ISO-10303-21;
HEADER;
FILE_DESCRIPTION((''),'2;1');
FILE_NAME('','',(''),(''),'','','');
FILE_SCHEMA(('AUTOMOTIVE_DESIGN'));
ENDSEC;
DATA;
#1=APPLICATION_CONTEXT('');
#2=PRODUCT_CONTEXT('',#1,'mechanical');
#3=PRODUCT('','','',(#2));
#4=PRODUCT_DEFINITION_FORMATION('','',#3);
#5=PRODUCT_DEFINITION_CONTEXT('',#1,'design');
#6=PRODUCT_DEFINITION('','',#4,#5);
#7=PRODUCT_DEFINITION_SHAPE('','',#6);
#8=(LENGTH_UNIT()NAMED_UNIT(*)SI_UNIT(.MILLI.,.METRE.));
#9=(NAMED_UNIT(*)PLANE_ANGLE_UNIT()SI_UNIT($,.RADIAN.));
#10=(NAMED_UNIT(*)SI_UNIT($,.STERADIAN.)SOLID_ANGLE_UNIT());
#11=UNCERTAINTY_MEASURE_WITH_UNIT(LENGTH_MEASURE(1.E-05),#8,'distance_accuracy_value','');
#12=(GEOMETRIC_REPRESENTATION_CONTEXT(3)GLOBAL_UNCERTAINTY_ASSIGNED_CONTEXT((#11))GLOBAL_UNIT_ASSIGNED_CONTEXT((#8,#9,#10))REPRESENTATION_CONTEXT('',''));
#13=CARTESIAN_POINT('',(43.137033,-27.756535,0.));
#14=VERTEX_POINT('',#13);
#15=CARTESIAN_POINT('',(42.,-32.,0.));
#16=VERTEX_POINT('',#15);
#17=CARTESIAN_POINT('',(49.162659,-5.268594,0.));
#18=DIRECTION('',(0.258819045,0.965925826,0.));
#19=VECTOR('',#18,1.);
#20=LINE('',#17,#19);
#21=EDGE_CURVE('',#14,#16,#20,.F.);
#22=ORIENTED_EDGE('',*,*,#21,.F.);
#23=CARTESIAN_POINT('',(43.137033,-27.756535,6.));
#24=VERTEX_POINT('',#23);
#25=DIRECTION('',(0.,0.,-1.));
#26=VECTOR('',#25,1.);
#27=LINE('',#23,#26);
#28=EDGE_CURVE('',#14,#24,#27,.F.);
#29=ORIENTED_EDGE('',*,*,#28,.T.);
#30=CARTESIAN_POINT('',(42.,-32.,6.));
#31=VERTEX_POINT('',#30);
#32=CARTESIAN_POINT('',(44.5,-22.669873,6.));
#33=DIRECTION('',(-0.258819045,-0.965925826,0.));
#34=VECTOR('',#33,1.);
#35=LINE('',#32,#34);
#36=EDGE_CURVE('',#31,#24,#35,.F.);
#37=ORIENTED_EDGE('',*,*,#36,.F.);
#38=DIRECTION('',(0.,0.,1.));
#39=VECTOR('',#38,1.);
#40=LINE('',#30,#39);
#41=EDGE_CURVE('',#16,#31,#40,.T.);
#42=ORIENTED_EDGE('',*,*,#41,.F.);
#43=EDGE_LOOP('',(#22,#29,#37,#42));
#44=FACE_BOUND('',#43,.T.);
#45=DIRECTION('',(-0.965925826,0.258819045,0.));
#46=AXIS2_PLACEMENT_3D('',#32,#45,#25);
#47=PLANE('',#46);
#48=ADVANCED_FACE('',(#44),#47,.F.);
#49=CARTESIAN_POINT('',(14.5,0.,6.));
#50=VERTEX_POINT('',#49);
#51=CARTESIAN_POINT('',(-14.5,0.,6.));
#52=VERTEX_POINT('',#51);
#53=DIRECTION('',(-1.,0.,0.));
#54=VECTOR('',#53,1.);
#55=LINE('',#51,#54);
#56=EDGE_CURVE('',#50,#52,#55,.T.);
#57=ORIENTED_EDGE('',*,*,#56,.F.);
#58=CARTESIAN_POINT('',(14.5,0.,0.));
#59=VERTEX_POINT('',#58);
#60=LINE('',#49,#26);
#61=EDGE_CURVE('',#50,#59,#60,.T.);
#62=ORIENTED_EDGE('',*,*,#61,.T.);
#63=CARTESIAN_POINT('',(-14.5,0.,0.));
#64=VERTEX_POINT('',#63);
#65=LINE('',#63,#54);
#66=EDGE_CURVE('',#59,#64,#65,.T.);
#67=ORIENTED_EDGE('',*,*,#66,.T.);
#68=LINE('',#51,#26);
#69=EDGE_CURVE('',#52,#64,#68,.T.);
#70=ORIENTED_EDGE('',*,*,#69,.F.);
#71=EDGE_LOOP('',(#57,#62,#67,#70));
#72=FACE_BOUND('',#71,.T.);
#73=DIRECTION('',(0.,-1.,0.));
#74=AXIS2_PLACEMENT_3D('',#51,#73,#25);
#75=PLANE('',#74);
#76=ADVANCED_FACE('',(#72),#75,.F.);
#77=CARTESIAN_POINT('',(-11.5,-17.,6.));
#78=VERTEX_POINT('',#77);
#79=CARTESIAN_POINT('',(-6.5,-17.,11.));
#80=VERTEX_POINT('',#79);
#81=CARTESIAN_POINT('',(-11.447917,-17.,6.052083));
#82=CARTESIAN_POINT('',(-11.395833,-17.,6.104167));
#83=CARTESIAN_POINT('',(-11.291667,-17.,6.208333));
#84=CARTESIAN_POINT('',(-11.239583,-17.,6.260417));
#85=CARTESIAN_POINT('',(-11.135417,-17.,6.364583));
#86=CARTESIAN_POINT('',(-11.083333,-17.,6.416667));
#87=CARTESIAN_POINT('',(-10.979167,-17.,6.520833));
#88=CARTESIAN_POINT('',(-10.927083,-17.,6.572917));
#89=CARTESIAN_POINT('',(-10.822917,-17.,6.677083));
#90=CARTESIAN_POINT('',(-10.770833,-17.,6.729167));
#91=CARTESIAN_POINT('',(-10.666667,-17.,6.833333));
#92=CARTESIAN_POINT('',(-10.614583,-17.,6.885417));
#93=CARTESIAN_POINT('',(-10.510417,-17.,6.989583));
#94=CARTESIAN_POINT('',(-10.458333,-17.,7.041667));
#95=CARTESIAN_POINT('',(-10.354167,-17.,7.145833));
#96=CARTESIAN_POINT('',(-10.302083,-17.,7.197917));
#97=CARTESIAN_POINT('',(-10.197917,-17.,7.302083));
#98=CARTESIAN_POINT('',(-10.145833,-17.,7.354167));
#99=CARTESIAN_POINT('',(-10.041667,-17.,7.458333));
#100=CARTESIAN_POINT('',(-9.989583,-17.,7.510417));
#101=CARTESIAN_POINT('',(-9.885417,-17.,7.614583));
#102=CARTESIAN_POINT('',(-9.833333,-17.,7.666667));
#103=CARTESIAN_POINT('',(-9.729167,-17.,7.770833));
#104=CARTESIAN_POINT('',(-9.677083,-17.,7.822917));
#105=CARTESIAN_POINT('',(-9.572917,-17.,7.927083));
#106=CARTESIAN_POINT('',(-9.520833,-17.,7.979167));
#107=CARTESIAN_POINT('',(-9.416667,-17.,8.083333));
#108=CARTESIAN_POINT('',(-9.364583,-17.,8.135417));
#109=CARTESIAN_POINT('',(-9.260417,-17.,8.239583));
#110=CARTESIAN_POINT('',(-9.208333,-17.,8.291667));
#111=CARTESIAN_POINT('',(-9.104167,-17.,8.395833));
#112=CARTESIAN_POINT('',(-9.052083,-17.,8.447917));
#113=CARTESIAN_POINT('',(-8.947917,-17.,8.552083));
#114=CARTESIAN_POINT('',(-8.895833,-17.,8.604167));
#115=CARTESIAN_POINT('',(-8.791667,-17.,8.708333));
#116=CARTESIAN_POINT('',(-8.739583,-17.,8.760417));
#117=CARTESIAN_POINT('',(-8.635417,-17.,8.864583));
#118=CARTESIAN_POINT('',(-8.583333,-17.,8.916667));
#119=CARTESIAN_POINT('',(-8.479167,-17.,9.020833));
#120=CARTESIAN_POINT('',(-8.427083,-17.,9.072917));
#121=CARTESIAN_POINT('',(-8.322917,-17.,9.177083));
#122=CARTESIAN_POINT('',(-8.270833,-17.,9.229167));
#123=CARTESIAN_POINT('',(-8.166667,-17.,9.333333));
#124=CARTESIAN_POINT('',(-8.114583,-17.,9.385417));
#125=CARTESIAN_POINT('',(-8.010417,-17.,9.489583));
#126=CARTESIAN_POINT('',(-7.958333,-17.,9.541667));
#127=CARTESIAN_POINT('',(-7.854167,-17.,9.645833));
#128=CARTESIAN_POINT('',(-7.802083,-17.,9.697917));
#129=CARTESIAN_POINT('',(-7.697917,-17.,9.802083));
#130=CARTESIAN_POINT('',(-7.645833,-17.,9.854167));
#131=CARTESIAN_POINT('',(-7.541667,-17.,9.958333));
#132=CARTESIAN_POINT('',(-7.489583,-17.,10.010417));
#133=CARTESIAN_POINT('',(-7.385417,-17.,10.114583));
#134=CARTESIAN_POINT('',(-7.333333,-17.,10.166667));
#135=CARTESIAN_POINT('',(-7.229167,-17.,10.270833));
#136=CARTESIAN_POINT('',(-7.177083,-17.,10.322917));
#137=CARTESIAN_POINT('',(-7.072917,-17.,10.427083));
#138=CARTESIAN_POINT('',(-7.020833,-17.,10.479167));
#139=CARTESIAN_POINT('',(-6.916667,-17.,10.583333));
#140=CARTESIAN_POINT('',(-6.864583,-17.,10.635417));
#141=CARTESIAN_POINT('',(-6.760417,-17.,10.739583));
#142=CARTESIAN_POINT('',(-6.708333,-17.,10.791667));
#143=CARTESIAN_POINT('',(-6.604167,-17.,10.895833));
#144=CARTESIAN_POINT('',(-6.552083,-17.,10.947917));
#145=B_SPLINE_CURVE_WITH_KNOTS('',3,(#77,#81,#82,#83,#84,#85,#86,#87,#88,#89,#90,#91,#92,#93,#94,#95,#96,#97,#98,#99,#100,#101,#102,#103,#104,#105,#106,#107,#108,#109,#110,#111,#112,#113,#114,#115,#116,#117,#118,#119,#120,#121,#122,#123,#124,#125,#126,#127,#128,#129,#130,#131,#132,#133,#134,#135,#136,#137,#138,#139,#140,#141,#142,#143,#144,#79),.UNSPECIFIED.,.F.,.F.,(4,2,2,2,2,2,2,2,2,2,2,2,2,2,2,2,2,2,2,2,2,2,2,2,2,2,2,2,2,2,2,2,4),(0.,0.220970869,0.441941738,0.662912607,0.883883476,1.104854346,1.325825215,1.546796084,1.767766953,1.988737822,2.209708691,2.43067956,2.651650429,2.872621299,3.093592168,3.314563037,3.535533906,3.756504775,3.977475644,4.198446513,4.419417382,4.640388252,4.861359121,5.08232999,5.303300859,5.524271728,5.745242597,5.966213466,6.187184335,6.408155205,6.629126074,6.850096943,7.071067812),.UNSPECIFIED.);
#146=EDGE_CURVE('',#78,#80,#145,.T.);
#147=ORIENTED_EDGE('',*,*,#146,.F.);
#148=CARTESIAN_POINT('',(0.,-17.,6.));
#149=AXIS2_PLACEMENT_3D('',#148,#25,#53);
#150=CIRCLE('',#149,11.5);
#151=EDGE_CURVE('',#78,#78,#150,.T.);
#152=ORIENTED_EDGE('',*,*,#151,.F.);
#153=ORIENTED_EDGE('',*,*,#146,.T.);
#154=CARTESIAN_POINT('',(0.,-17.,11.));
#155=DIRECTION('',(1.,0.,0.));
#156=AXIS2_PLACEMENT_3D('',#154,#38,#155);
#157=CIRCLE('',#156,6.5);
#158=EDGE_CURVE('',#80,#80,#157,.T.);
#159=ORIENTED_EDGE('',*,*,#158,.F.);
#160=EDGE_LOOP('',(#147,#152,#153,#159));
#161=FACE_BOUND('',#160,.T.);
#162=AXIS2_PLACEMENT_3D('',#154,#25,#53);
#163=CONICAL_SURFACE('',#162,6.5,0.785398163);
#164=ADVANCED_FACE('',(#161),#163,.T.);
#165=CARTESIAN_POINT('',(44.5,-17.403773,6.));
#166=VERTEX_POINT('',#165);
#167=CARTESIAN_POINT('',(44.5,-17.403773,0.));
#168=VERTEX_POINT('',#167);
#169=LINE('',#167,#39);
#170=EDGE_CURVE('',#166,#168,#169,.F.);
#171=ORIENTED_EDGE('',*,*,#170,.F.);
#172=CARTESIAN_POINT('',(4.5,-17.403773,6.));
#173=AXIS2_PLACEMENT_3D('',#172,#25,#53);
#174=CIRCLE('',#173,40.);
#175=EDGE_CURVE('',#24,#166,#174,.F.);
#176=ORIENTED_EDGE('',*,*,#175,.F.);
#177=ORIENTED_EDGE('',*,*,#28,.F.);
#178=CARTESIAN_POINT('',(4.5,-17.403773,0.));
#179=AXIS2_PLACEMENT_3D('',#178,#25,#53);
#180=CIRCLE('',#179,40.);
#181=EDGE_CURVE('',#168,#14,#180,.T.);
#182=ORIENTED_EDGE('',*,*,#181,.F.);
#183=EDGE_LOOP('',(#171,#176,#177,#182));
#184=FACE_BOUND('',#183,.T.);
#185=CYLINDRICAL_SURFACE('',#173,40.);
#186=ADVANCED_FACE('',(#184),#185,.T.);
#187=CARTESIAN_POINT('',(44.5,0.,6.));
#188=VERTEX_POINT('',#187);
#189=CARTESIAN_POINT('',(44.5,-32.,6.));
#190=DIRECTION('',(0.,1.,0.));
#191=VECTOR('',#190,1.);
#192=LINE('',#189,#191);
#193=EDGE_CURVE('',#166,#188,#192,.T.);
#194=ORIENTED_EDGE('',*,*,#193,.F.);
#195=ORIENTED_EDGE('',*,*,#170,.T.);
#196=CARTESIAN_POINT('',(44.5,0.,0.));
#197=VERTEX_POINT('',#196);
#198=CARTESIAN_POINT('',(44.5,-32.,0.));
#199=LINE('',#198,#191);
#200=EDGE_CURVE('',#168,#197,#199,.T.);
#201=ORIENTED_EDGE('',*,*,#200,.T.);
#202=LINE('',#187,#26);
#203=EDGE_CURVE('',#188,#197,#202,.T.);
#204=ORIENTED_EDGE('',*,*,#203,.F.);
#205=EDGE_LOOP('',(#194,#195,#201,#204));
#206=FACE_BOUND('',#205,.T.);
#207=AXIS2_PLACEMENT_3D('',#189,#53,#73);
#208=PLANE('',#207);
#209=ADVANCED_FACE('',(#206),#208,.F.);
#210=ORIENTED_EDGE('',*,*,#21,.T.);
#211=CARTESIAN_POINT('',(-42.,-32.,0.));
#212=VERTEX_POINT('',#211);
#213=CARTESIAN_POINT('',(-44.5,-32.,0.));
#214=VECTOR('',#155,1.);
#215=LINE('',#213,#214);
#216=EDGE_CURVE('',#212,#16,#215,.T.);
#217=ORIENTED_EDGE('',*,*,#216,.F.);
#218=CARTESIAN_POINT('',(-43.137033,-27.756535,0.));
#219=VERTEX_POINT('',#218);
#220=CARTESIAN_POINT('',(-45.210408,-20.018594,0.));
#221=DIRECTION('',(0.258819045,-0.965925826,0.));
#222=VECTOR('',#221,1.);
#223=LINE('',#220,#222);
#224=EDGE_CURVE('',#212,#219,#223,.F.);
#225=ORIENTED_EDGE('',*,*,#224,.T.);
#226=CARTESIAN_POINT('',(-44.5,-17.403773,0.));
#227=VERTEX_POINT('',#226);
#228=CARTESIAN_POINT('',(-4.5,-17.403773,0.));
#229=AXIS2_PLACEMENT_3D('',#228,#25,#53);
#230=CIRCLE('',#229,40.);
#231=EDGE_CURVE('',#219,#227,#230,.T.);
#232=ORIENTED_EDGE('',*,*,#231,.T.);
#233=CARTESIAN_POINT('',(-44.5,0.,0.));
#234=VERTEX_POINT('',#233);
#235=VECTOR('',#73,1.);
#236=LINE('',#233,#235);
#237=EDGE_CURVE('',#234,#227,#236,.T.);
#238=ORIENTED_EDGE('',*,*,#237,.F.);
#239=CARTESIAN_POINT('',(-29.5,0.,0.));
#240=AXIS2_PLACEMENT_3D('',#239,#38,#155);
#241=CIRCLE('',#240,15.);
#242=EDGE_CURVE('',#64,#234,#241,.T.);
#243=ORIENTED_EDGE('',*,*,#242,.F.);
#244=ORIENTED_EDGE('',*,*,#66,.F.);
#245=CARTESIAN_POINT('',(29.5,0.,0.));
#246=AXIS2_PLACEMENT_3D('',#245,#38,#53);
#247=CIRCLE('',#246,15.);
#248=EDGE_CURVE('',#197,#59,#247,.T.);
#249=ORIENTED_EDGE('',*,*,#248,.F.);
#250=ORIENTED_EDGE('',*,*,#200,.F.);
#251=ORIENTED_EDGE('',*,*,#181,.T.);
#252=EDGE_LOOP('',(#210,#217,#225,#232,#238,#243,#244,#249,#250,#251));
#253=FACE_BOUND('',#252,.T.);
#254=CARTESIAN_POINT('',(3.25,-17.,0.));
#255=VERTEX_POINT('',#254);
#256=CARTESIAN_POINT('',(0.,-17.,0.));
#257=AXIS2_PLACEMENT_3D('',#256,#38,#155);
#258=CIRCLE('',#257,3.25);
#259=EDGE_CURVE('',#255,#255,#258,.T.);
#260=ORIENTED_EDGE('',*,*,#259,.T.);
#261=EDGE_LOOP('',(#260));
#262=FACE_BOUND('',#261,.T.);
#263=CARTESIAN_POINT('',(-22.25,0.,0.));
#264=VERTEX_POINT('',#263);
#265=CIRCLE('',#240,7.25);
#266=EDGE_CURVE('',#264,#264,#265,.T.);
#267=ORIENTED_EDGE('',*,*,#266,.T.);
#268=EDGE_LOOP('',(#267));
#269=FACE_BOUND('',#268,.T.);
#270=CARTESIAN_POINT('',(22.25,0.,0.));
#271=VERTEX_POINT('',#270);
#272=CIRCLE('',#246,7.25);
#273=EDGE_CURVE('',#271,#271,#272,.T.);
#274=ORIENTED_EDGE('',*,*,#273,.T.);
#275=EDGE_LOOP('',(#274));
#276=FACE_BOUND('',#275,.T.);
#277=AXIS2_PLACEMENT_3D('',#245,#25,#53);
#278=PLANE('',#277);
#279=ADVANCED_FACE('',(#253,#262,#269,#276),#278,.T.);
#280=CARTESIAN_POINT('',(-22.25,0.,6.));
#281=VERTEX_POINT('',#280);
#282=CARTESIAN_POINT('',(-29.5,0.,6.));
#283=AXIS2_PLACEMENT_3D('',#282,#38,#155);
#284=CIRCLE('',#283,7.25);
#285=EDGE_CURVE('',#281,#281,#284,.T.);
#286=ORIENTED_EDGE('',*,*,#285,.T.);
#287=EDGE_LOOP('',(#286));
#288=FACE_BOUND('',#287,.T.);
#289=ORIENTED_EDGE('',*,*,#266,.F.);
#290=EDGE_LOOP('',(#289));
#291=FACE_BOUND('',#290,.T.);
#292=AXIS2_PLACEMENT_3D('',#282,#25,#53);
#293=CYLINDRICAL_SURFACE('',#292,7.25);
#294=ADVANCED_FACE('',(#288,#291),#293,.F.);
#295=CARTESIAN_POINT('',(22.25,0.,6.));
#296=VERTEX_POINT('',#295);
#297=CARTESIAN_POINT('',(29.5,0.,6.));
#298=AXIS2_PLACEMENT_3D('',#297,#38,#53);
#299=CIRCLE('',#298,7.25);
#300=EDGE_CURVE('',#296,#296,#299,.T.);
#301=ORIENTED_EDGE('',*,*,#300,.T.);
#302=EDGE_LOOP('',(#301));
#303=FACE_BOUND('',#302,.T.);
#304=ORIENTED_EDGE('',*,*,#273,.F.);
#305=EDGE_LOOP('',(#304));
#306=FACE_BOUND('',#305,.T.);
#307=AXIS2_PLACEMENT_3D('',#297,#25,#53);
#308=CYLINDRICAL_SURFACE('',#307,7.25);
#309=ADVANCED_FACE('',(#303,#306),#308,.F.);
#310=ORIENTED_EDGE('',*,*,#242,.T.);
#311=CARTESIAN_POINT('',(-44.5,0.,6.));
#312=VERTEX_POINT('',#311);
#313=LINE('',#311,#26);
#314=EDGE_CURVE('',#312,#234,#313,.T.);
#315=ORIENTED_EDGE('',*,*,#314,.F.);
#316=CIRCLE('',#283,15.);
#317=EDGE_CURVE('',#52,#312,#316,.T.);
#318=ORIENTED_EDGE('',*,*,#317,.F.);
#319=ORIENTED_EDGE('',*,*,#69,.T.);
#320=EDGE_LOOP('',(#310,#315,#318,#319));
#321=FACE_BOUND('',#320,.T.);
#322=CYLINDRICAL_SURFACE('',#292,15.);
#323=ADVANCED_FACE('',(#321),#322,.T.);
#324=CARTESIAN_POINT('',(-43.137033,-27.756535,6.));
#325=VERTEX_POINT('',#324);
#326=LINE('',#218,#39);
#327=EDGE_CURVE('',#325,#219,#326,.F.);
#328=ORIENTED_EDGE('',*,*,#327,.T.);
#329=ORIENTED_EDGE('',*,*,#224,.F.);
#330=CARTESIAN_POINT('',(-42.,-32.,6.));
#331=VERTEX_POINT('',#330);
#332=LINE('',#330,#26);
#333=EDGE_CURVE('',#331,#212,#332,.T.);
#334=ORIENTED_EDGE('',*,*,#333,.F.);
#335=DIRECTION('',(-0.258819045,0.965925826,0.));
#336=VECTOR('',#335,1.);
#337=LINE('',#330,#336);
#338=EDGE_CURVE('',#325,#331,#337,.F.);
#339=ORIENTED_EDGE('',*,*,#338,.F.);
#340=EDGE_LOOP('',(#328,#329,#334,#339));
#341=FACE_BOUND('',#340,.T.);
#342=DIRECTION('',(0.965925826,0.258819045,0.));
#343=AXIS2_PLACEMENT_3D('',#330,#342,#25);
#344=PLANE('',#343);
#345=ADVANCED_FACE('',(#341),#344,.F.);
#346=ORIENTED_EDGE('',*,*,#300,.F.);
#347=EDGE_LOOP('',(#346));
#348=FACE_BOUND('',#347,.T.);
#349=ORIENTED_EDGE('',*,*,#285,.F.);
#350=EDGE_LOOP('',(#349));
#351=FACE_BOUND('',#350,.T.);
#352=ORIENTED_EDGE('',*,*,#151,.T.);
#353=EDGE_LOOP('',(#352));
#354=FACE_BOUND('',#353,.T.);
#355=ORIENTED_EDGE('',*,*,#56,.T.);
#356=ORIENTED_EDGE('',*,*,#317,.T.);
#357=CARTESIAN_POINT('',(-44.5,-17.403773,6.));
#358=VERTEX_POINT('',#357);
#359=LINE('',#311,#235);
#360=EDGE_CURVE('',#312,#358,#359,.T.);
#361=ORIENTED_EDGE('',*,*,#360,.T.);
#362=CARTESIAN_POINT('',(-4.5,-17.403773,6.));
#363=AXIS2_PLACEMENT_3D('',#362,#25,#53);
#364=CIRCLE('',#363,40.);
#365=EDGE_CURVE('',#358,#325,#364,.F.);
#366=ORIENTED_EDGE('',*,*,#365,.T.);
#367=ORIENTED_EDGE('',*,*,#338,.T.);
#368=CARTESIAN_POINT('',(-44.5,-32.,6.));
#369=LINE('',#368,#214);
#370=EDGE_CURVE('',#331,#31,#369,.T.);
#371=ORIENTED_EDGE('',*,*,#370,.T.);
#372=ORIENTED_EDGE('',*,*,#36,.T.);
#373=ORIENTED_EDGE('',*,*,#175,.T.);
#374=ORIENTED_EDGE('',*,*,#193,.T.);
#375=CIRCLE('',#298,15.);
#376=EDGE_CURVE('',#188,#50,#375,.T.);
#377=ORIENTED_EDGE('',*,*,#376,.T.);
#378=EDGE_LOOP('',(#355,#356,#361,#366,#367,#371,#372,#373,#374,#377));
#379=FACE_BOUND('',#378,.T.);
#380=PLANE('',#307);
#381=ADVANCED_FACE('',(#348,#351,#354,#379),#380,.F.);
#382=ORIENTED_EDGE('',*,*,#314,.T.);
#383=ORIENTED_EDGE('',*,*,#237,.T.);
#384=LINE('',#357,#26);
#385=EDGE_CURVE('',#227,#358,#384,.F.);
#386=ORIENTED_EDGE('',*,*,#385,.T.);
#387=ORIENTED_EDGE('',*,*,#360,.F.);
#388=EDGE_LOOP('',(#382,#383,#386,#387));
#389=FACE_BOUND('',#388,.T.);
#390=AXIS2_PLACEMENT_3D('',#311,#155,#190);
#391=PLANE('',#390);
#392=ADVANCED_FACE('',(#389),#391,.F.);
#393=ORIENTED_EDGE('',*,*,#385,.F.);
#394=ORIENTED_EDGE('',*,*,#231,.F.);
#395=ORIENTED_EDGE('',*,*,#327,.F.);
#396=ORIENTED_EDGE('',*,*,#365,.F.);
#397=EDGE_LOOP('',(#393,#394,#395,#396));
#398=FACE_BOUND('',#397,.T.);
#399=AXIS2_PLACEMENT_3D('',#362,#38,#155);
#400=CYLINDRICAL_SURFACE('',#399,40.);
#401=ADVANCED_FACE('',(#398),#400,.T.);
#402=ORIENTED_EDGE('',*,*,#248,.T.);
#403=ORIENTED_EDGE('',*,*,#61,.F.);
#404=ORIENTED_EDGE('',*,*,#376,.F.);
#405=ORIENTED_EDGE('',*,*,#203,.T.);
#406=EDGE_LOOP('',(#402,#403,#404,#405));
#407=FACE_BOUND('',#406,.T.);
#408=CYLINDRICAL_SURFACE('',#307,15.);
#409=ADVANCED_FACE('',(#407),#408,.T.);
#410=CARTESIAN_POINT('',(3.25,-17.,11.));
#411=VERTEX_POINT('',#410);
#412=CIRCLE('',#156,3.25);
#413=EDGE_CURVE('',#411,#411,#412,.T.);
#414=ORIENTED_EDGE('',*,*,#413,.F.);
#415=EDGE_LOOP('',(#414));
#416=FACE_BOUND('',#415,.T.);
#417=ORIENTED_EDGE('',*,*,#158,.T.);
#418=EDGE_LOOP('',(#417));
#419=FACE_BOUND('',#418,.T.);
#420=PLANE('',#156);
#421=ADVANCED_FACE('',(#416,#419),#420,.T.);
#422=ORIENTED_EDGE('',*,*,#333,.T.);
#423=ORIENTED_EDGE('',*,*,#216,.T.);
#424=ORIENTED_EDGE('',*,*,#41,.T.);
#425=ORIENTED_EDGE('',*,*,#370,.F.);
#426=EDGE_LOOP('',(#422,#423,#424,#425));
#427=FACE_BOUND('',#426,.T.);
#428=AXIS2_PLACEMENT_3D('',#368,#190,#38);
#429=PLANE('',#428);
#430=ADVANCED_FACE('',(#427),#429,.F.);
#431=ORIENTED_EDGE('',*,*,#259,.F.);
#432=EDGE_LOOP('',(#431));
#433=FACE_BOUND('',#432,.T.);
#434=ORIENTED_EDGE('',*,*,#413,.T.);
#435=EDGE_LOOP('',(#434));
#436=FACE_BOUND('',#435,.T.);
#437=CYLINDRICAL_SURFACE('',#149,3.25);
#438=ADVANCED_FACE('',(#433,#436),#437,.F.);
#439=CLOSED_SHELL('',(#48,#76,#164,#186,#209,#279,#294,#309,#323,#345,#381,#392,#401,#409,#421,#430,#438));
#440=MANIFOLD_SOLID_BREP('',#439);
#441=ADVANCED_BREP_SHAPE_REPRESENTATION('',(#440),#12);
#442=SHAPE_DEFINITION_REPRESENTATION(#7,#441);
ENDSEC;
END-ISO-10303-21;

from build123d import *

# Parameters (mm, degrees)
SKETCH1_R           = 7.25
SKETCH1_R_2         = 3.25
BOSS_EXTRUDE1_DEPTH = 6
SKETCH2_R           = 6.5
SKETCH2_R_2         = 3.25
BOSS_EXTRUDE2_DEPTH = 5
CHAMFER1_SIZE       = 5
CHAMFER2_SIZE       = 2.5
CHAMFER2_SIZE2      = 9.330127019
FILLET1_R           = 40
CHAMFER3_SIZE       = 2.5
CHAMFER3_SIZE2      = 9.330127019
FILLET2_R           = 40


with BuildPart() as part:
    # Sketch1 → Boss-Extrude1 (new body)
    with BuildSketch(Plane.XY):
        with BuildLine():
            Line((-44.5, 0), (-44.5, -32))
            Line((-44.5, -32), (44.5, -32))
            Line((44.5, -32), (44.5, 0))
            ThreePointArc((44.5, 0), (29.5, 15), (14.5, 0))
            Line((14.5, 0), (-14.5, 0))
            ThreePointArc((-14.5, 0), (-29.5, 15), (-44.5, 0))
        make_face()
        with Locations((-29.5, 0)):
            Circle(SKETCH1_R, mode=Mode.SUBTRACT)
        with Locations(Location((29.5, 0, 0), (0, 0, 180))):
            Circle(SKETCH1_R, mode=Mode.SUBTRACT)
        with Locations((0, -17)):
            Circle(SKETCH1_R_2, mode=Mode.SUBTRACT)
    extrude(amount=BOSS_EXTRUDE1_DEPTH)

    # Sketch2 → Boss-Extrude2 (add)
    with BuildSketch(Plane.XY.offset(6)):
        with Locations(Location((0, -17, 0), (0, 0, 180))):
            Circle(SKETCH2_R)
        with Locations((0, -17)):
            Circle(SKETCH2_R_2, mode=Mode.SUBTRACT)
    extrude(amount=BOSS_EXTRUDE2_DEPTH)

    # Chamfer1
    chamfer1_edges = [part.edges().sort_by_distance(p)[0] for p in [
        (6.5, -17, 6),
    ]]
    chamfer(chamfer1_edges, length=CHAMFER1_SIZE - 0.0001)  # a hair under: the kernel refuses the full size

    # Chamfer2
    chamfer2_edges = [part.edges().sort_by_distance(p)[0] for p in [
        (-44.5, -32, 3),
    ]]
    chamfer2_side = [part.faces().sort_by_distance(p)[0] for p in [
        (0, -32, 3),
    ]]
    chamfer(chamfer2_edges, length=CHAMFER2_SIZE, length2=CHAMFER2_SIZE2, reference=chamfer2_side[0])

    # Fillet1
    fillet1_edges = [part.edges().sort_by_distance(p)[0] for p in [
        (-44.5, -22.669872981, 3),
    ]]
    fillet(fillet1_edges, radius=FILLET1_R)

    # Chamfer3
    chamfer3_edges = [part.edges().sort_by_distance(p)[0] for p in [
        (44.5, -32, 3),
    ]]
    chamfer3_side = [part.faces().sort_by_distance(p)[0] for p in [
        (1.25, -32, 3),
    ]]
    chamfer(chamfer3_edges, length=CHAMFER3_SIZE, length2=CHAMFER3_SIZE2, reference=chamfer3_side[0])

    # Fillet2
    fillet2_edges = [part.edges().sort_by_distance(p)[0] for p in [
        (44.5, -22.669872981, 3),
    ]]
    fillet(fillet2_edges, radius=FILLET2_R)


solid = part.part
